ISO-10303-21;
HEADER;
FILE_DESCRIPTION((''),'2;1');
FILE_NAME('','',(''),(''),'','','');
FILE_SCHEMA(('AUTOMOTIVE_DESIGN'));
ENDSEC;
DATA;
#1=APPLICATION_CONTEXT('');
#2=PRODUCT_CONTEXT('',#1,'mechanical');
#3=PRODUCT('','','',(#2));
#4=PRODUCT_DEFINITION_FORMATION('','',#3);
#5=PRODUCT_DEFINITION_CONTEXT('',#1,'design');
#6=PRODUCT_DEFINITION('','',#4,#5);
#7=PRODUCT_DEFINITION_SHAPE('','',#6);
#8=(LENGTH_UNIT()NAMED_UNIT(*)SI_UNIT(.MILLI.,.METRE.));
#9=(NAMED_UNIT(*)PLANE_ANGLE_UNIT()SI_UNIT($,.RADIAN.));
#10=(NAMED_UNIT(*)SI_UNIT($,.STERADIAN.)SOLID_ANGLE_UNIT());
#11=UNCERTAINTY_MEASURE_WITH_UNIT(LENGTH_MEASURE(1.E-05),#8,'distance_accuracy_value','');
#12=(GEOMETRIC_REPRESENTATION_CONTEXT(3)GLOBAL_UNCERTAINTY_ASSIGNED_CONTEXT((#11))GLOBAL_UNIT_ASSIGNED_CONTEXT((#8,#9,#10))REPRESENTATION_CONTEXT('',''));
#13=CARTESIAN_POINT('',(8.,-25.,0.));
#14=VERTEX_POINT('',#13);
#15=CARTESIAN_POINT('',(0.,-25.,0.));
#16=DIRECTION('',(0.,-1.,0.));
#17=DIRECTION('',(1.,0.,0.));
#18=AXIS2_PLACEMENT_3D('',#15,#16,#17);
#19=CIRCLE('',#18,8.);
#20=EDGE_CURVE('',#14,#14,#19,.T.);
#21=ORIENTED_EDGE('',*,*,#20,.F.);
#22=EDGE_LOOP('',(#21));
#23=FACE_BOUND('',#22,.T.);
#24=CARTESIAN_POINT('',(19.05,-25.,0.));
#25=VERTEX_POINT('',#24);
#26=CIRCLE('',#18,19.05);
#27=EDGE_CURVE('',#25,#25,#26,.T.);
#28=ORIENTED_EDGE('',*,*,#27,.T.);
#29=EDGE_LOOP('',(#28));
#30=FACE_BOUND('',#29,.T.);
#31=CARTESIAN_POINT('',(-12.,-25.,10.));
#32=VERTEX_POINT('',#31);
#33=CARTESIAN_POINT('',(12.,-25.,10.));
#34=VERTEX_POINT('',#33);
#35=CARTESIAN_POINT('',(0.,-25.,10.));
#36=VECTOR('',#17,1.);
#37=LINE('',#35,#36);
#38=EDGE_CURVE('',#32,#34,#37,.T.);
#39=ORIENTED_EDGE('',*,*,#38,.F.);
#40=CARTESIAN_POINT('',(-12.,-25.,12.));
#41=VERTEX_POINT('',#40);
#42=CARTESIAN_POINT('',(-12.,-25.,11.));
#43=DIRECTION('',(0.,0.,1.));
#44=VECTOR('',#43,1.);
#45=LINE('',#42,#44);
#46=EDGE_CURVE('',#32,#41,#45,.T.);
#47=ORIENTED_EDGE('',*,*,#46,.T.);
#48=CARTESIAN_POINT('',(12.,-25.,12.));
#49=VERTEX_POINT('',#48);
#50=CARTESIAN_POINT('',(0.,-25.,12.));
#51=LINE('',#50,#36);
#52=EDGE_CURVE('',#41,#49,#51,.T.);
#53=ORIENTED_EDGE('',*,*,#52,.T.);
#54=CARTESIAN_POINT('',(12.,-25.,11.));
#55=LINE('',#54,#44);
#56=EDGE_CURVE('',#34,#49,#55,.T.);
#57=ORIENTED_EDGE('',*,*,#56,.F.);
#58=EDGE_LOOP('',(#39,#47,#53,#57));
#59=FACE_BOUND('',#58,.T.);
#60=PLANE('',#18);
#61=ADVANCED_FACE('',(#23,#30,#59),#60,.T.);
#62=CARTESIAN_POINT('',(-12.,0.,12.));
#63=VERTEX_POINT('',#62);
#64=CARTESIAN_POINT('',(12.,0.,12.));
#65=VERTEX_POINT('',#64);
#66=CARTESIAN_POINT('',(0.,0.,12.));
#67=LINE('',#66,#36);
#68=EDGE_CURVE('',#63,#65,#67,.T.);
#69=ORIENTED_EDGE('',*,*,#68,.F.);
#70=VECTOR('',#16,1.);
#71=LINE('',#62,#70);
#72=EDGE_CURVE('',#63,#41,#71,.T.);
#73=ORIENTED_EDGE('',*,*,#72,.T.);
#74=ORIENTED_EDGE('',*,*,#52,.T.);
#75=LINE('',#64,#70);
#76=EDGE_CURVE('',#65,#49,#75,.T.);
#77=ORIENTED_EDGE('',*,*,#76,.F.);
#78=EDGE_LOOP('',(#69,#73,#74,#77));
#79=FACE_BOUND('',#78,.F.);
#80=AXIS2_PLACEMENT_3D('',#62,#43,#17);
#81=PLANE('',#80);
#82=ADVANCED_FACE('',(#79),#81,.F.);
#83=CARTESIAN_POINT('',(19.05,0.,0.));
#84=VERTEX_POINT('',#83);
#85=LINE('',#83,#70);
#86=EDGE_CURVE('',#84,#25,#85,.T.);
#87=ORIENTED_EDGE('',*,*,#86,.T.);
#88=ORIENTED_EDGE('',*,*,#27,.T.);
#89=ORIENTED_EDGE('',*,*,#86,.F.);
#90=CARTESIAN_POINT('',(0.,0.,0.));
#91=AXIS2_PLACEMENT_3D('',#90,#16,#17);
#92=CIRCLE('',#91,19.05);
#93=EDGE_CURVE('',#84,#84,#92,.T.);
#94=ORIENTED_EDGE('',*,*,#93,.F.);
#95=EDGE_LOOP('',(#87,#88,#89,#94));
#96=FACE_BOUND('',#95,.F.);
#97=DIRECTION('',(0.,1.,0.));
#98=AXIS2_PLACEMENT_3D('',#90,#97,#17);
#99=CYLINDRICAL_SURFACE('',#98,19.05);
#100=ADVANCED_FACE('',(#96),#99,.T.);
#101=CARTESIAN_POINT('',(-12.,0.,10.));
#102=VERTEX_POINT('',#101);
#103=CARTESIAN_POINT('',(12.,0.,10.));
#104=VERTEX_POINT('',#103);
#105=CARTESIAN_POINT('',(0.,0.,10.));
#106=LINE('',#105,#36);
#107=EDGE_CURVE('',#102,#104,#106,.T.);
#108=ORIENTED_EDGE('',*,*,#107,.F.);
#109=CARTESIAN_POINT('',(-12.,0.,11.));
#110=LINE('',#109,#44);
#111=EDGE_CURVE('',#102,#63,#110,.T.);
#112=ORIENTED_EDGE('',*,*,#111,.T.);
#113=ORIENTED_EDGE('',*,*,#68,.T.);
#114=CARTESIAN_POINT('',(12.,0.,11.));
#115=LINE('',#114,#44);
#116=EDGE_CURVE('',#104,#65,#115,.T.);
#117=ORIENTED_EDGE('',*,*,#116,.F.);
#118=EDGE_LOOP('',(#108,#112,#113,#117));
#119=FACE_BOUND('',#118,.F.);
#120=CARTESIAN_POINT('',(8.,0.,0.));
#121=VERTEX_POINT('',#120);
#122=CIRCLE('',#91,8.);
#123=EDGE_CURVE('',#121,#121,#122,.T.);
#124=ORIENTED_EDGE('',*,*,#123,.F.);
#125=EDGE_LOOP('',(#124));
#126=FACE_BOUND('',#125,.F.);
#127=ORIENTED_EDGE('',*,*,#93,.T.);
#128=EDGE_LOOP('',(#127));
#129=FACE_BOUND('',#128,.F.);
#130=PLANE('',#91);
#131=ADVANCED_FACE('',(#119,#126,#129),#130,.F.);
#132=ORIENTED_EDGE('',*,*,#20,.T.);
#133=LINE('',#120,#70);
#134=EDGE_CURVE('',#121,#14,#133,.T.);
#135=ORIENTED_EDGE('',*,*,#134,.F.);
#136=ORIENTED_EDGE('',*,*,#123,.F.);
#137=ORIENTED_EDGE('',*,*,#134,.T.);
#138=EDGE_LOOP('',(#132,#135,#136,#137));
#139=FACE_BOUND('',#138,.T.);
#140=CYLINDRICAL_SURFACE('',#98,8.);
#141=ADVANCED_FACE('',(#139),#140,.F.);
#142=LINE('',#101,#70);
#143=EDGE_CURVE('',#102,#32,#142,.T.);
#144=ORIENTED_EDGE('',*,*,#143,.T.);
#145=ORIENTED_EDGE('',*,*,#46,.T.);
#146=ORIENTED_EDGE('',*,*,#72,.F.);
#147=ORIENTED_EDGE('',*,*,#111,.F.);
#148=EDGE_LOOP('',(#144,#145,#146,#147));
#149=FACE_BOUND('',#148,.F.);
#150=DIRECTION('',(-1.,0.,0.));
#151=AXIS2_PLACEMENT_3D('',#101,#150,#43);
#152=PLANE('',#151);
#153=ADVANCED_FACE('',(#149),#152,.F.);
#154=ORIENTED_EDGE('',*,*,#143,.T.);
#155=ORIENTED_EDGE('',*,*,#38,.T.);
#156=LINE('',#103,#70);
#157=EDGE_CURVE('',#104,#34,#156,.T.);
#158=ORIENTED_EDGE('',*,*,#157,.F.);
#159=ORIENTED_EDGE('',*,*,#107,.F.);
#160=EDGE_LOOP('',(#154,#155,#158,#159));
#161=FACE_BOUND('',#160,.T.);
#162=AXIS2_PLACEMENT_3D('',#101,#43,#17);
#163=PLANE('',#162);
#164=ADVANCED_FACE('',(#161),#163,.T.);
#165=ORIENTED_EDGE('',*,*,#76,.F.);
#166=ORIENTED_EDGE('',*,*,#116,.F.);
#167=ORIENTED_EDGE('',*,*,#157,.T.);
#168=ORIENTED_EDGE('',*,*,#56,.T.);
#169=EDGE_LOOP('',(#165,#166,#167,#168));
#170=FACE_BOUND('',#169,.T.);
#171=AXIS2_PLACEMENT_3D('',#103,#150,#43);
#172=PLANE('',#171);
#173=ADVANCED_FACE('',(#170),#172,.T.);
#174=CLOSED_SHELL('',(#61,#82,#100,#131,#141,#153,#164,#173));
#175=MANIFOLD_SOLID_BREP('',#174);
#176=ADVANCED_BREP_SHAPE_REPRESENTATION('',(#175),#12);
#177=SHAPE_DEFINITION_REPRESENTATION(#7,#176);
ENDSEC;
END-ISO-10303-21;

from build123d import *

# Parameters (mm, degrees)
F0_R     = 19.05
F0_R_2   = 8
F0_W     = 24
F0_H     = 2
F3_DEPTH = 25


# Not quite as in the source:
# - the program builds the solid bodies; features that only make, move or delete a surface that nothing else refers to are left out


with BuildPart() as f3:
    # F0 (on Front) → F3 (new body)
    with BuildSketch(Plane.XZ):
        Circle(F0_R)
        Circle(F0_R_2, mode=Mode.SUBTRACT)
        with Locations((0, 11)):
            Rectangle(F0_W, F0_H, mode=Mode.SUBTRACT)
    extrude(amount=F3_DEPTH)


solid = f3.part
